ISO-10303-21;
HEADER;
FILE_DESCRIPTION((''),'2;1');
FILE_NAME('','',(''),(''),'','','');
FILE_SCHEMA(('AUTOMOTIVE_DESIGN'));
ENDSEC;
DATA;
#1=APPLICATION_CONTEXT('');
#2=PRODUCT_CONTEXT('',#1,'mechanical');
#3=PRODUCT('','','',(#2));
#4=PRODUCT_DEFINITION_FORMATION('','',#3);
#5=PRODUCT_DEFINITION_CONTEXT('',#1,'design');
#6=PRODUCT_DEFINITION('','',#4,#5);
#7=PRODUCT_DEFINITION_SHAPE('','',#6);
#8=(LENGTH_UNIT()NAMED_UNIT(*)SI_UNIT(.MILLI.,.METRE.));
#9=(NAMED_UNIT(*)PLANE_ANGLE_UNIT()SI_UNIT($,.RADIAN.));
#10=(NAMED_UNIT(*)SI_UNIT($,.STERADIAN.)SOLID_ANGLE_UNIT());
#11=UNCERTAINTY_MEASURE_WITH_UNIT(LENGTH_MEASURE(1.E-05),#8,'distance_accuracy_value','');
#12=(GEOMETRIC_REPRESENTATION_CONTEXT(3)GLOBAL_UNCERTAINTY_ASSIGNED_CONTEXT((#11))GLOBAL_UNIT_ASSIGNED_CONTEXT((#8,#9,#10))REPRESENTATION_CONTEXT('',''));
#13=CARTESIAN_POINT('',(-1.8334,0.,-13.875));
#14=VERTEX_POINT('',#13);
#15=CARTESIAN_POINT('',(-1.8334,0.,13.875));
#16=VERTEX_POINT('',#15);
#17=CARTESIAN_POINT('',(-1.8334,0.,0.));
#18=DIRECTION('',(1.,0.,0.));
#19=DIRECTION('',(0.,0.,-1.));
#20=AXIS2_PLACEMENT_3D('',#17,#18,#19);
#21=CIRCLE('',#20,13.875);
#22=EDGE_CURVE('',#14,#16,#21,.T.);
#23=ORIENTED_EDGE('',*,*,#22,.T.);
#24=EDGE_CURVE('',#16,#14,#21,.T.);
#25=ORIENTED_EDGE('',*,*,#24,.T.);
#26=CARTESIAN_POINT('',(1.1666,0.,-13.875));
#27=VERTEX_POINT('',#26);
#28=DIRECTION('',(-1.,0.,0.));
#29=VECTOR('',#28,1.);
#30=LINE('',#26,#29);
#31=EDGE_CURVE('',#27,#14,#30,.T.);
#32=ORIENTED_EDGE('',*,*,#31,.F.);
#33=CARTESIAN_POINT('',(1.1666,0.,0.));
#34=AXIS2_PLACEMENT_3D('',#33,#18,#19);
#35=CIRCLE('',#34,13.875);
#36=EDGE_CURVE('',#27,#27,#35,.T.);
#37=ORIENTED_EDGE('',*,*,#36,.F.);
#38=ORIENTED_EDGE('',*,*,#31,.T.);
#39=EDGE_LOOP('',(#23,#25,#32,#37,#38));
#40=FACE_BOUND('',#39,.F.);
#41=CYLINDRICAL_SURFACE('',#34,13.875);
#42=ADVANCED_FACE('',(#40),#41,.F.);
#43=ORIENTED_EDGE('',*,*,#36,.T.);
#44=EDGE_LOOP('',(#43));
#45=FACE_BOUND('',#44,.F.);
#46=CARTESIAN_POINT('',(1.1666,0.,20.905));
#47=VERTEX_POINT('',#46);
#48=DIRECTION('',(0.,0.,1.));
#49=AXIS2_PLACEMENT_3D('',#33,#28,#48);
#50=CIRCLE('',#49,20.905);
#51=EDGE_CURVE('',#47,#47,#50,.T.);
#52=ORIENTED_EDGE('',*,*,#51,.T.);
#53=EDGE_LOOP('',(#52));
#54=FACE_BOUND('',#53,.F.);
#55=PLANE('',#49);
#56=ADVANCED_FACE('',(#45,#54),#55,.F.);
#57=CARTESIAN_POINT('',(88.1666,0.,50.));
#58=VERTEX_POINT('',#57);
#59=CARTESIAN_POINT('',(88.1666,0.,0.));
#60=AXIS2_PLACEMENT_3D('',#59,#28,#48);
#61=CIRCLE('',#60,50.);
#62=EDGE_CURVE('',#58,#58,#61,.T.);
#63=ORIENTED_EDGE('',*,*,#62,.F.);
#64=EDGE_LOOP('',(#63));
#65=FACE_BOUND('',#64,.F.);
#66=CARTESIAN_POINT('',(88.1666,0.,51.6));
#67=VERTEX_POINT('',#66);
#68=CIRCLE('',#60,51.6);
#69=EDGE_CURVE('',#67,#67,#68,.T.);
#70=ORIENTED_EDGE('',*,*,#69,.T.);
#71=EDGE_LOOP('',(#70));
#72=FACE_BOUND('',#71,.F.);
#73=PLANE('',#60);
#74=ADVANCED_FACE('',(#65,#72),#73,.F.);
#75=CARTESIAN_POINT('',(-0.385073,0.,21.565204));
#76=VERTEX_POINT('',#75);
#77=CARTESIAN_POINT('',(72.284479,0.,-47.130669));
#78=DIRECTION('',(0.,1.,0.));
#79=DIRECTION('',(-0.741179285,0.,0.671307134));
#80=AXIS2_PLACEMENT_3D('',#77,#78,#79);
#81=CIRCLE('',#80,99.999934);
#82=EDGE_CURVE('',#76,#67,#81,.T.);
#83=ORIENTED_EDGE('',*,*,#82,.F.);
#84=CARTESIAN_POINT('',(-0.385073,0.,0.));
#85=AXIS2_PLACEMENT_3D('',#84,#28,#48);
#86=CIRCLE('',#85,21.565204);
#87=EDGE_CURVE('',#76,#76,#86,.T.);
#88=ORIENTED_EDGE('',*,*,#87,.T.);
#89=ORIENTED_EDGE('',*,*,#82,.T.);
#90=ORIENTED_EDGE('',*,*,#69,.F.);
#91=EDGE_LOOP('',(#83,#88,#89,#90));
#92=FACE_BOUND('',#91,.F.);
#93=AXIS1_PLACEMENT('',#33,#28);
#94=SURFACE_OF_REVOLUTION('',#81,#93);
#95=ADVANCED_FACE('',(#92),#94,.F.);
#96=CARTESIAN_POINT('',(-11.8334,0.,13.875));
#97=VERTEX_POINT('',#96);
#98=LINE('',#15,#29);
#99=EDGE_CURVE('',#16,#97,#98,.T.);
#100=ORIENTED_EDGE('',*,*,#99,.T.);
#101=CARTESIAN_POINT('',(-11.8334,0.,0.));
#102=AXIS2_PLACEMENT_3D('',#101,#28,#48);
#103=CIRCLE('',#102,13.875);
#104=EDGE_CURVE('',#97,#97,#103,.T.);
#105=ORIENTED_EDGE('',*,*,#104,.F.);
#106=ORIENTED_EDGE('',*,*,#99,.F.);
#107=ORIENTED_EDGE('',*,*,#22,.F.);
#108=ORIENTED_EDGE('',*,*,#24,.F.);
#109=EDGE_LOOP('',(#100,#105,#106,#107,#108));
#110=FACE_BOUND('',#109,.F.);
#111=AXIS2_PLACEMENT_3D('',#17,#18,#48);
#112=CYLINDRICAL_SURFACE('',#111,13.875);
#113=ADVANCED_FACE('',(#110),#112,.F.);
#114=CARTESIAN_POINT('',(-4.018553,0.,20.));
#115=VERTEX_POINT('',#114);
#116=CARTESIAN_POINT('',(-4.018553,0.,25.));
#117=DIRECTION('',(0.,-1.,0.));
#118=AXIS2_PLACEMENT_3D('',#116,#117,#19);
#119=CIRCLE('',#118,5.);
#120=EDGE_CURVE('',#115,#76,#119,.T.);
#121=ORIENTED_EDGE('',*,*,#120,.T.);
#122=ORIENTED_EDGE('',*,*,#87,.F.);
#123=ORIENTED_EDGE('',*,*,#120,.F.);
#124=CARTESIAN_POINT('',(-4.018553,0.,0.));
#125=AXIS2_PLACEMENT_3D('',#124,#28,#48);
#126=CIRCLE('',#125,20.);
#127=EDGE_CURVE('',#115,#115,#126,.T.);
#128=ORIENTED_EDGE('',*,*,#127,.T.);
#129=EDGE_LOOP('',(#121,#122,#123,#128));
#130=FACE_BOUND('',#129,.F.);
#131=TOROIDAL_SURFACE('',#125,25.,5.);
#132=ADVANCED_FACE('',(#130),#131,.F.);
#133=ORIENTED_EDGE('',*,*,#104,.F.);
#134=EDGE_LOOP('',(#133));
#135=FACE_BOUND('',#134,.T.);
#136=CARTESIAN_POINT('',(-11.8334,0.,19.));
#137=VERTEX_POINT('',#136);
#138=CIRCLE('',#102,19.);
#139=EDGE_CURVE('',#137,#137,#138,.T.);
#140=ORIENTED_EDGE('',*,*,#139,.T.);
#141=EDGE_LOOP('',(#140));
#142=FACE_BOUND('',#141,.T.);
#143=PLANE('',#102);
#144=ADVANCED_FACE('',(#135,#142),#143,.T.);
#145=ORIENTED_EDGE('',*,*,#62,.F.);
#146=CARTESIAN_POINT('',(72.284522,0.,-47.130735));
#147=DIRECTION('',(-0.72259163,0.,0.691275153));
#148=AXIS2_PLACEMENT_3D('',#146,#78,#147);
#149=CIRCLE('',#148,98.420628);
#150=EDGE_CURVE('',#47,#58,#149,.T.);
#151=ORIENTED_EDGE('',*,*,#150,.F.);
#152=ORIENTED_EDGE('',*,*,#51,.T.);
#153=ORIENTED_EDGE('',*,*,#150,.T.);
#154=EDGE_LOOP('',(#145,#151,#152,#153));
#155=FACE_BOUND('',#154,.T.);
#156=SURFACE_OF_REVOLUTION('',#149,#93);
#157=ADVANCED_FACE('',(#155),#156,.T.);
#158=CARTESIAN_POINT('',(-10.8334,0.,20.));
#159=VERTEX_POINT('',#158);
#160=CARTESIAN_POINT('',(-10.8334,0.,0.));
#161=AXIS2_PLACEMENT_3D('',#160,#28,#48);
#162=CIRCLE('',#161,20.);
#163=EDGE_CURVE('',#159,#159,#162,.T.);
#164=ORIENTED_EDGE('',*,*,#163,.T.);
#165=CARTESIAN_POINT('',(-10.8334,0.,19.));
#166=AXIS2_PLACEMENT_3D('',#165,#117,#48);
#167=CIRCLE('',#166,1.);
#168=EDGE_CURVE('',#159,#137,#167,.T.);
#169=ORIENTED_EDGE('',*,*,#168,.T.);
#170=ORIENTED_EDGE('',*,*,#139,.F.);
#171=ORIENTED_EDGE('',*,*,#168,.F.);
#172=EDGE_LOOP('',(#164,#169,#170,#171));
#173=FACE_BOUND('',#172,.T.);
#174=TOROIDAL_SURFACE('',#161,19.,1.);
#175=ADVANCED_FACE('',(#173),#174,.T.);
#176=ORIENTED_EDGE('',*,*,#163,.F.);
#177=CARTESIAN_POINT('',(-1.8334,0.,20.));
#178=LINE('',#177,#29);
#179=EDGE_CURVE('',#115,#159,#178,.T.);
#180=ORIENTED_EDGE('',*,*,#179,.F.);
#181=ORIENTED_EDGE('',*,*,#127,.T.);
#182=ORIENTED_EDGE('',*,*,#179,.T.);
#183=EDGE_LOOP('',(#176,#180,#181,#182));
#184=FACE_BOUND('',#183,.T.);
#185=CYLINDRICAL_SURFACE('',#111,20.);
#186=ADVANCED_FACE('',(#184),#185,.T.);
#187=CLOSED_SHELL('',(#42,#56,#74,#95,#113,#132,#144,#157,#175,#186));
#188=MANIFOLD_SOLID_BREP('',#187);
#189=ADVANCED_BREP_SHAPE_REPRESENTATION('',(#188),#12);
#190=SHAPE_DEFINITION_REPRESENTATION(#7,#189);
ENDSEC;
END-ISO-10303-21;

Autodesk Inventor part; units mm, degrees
ref_plane "YZ Plane" through (0, 0, 0) normal (1, 0, 0) x (0, 1, 0)
ref_plane "XZ Plane" through (0, 0, 0) normal (0, 1, 0) x (-1, 0, 0)
ref_plane "XY Plane" through (0, 0, 0) normal (0, 0, 1) x (1, 0, 0)
sketch "Sketch1" plane through (0, 0, 0) normal (0, 1, 0) x (-1, 0, 0)
  line L0 (1.8334, 0) -> (1.8334, 20)
  line L1 (-88.1666, 51.6) -> (-88.1666, 50)
  line L2 (-1.1666, 20.905) -> (-1.1666, 0)
  line L3 (-1.1666, 0) -> (1.8334, 0)
  arc A0 (-1.1666, 20.905) -> (-88.1666, 50) centre (-72.2845, -47.1307) ccw
  arc A1 (1.8334, 20) -> (-88.1666, 51.6) centre (-72.2845, -47.1307) ccw
  point P0 (0, 0)
  point P1 (-1.1666, 10.4525)
  dimension "d0" = 3
  dimension "d2" = 1.6
  dimension "d3" = 20
  dimension "d4" = 90
  dimension "d5" = 50
  dimension "d10" = 100
revolve "Revolution1" add sketch "Sketch1" angle 360 about axis through (1.1666, 0, 0) along (-1, 0, 0)
sketch "Sketch2" plane through (1.1666, 0, 0) normal (1, 0, 0) x (0, 0, -1)
  circle A0 centre (0, 0) radius 13.875
  point P0 (0, 0)
  dimension "d7" = 27.75
extrude "Extrusion1" cut sketch "Sketch2" against normal through all
sketch "Sketch3" plane through (-1.8334, 0, 0) normal (-1, 0, 0) x (0, 0, 1)
  circle A0 centre (0, 0) radius 13.875 projected
  circle A1 centre (0, 0) radius 20 projected
  point P0 (0, 0)
extrude "Extrusion2" add sketch "Sketch3" along normal blind 10
fillet "Fillet1" radius 5 1 edges at (-1.8334, 0, -20)
fillet "Fillet2" radius 1 1 edges at (-11.8334, 0, -20)
properties part number "Screen"
